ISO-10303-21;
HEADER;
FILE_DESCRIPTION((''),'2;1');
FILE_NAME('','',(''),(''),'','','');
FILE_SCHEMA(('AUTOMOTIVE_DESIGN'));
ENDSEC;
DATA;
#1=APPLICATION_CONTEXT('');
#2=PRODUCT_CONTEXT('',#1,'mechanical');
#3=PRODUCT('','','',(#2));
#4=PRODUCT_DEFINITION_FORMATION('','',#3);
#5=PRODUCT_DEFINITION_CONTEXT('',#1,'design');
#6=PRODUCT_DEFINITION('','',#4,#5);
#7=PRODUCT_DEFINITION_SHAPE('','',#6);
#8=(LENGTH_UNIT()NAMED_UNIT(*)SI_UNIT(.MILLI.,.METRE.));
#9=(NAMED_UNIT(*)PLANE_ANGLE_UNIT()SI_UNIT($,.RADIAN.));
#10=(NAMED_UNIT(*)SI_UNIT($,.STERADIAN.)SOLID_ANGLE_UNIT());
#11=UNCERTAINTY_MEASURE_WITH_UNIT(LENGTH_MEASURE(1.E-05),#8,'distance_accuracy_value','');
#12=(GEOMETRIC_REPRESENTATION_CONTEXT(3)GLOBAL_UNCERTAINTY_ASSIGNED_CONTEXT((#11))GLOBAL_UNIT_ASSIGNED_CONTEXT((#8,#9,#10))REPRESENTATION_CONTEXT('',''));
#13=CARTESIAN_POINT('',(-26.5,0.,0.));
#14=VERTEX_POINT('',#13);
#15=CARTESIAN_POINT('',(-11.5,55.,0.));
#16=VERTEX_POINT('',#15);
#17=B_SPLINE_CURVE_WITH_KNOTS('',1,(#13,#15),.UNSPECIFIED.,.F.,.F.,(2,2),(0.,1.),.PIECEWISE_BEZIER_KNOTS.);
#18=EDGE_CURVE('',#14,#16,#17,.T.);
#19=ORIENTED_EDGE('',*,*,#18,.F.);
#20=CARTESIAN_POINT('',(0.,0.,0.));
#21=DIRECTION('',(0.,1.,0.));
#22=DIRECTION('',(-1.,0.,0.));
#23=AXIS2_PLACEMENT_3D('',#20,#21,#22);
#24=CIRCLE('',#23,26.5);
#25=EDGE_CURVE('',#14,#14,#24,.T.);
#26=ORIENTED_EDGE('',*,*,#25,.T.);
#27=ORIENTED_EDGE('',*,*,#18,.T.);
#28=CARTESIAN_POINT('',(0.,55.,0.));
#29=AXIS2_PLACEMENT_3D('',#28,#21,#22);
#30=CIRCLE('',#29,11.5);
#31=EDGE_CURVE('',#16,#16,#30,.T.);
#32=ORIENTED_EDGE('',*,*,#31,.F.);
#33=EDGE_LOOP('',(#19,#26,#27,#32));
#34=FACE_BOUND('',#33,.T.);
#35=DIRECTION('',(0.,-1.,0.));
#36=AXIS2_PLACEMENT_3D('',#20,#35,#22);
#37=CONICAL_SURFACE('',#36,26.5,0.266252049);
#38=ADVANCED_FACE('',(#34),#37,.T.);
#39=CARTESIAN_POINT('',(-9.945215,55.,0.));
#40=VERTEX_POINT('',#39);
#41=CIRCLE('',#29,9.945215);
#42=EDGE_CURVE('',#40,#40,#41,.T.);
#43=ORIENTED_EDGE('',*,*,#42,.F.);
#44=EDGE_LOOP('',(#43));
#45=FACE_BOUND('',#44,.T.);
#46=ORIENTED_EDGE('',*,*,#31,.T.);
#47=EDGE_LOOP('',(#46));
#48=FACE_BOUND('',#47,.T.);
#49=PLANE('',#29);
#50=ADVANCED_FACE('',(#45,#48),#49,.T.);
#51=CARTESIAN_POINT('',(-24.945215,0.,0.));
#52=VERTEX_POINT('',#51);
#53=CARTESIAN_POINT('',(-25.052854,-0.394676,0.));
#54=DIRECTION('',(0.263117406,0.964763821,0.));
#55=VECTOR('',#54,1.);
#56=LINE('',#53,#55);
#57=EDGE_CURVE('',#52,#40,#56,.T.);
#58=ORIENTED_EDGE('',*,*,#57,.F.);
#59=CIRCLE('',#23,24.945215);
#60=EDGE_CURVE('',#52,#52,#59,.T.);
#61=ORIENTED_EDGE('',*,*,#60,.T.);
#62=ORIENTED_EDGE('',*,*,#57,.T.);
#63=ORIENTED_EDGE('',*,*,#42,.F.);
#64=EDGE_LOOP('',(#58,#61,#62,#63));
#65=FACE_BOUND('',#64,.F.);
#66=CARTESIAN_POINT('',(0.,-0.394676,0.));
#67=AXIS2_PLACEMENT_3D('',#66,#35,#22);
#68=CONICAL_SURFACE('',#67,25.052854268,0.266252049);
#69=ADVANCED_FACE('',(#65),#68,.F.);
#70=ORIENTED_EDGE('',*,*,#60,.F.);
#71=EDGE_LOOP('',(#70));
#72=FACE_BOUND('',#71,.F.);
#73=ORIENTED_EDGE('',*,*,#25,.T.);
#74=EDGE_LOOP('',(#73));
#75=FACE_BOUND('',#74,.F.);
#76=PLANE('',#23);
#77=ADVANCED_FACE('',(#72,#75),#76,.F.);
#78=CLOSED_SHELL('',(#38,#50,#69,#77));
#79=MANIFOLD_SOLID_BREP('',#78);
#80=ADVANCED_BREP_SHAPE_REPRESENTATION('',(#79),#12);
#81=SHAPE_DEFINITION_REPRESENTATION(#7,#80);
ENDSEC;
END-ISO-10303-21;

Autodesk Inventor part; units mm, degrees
ref_plane "YZ Plane" through (0, 0, 0) normal (1, 0, 0) x (0, 1, 0)
ref_plane "XY Plane" through (0, 0, 0) normal (0, 0, 1) x (1, 0, 0)
sketch "Szkic6" plane through (0, 0, 0) normal (0, 1, 0) x (-1, 0, 0)
  circle A0 centre (0, 0) radius 26.5
  dimension "d33" = 53
ref_plane "Płaszczyzna konstrukcyjna1" through (0, 55, 0) normal (0, 1, 0) x (-1, 0, 0)
sketch "Szkic7" plane through (0, 55, 0) normal (0, 1, 0) x (-1, 0, 0)
  circle A0 centre (0, 0) radius 11.5
  dimension "d35" = 23
loft "Wyciągnięcie złożone1" add profiles "Szkic6", "Szkic7"
shell "Skorupa1" thickness 1.5 removed faces 2 at (-0.1507, 55, 2.542) at (-1.8199, 0, -2.5499)
equation "\"d33\" = OD1"
equation "\"d35\" = OD2"
equation "\"d52\" = THK"
equation "\"SzerokośćGięciaPodcięcia\" = Grubość"
equation "\"RozmiarPodcięciaNarożnika\" = 4 * Grubość"
equation "\"PromieńPrzejścia\" = PromieńGięcia"
equation "\"Rozmiar_promienia_Jacobiego\" = PromieńGięcia"
equation "\"Wielk_odstępu\" = Grubość"
equation "\"d2\" = PromieńGięcia"
equation "\"d23\" = PromieńGięcia"
equation "\"OD1\" = 53"
equation "\"OD2\" = 23"
equation "\"L\" = 55"
equation "\"THK\" = 1.5"
equation "\"d34\" = L"
equation "\"Grubość\" = 1.5"
equation "\"PromieńGięcia\" = 3"
properties part number "Redukcja symetryczna Ø53x23x1,5 L=55" material "304"
